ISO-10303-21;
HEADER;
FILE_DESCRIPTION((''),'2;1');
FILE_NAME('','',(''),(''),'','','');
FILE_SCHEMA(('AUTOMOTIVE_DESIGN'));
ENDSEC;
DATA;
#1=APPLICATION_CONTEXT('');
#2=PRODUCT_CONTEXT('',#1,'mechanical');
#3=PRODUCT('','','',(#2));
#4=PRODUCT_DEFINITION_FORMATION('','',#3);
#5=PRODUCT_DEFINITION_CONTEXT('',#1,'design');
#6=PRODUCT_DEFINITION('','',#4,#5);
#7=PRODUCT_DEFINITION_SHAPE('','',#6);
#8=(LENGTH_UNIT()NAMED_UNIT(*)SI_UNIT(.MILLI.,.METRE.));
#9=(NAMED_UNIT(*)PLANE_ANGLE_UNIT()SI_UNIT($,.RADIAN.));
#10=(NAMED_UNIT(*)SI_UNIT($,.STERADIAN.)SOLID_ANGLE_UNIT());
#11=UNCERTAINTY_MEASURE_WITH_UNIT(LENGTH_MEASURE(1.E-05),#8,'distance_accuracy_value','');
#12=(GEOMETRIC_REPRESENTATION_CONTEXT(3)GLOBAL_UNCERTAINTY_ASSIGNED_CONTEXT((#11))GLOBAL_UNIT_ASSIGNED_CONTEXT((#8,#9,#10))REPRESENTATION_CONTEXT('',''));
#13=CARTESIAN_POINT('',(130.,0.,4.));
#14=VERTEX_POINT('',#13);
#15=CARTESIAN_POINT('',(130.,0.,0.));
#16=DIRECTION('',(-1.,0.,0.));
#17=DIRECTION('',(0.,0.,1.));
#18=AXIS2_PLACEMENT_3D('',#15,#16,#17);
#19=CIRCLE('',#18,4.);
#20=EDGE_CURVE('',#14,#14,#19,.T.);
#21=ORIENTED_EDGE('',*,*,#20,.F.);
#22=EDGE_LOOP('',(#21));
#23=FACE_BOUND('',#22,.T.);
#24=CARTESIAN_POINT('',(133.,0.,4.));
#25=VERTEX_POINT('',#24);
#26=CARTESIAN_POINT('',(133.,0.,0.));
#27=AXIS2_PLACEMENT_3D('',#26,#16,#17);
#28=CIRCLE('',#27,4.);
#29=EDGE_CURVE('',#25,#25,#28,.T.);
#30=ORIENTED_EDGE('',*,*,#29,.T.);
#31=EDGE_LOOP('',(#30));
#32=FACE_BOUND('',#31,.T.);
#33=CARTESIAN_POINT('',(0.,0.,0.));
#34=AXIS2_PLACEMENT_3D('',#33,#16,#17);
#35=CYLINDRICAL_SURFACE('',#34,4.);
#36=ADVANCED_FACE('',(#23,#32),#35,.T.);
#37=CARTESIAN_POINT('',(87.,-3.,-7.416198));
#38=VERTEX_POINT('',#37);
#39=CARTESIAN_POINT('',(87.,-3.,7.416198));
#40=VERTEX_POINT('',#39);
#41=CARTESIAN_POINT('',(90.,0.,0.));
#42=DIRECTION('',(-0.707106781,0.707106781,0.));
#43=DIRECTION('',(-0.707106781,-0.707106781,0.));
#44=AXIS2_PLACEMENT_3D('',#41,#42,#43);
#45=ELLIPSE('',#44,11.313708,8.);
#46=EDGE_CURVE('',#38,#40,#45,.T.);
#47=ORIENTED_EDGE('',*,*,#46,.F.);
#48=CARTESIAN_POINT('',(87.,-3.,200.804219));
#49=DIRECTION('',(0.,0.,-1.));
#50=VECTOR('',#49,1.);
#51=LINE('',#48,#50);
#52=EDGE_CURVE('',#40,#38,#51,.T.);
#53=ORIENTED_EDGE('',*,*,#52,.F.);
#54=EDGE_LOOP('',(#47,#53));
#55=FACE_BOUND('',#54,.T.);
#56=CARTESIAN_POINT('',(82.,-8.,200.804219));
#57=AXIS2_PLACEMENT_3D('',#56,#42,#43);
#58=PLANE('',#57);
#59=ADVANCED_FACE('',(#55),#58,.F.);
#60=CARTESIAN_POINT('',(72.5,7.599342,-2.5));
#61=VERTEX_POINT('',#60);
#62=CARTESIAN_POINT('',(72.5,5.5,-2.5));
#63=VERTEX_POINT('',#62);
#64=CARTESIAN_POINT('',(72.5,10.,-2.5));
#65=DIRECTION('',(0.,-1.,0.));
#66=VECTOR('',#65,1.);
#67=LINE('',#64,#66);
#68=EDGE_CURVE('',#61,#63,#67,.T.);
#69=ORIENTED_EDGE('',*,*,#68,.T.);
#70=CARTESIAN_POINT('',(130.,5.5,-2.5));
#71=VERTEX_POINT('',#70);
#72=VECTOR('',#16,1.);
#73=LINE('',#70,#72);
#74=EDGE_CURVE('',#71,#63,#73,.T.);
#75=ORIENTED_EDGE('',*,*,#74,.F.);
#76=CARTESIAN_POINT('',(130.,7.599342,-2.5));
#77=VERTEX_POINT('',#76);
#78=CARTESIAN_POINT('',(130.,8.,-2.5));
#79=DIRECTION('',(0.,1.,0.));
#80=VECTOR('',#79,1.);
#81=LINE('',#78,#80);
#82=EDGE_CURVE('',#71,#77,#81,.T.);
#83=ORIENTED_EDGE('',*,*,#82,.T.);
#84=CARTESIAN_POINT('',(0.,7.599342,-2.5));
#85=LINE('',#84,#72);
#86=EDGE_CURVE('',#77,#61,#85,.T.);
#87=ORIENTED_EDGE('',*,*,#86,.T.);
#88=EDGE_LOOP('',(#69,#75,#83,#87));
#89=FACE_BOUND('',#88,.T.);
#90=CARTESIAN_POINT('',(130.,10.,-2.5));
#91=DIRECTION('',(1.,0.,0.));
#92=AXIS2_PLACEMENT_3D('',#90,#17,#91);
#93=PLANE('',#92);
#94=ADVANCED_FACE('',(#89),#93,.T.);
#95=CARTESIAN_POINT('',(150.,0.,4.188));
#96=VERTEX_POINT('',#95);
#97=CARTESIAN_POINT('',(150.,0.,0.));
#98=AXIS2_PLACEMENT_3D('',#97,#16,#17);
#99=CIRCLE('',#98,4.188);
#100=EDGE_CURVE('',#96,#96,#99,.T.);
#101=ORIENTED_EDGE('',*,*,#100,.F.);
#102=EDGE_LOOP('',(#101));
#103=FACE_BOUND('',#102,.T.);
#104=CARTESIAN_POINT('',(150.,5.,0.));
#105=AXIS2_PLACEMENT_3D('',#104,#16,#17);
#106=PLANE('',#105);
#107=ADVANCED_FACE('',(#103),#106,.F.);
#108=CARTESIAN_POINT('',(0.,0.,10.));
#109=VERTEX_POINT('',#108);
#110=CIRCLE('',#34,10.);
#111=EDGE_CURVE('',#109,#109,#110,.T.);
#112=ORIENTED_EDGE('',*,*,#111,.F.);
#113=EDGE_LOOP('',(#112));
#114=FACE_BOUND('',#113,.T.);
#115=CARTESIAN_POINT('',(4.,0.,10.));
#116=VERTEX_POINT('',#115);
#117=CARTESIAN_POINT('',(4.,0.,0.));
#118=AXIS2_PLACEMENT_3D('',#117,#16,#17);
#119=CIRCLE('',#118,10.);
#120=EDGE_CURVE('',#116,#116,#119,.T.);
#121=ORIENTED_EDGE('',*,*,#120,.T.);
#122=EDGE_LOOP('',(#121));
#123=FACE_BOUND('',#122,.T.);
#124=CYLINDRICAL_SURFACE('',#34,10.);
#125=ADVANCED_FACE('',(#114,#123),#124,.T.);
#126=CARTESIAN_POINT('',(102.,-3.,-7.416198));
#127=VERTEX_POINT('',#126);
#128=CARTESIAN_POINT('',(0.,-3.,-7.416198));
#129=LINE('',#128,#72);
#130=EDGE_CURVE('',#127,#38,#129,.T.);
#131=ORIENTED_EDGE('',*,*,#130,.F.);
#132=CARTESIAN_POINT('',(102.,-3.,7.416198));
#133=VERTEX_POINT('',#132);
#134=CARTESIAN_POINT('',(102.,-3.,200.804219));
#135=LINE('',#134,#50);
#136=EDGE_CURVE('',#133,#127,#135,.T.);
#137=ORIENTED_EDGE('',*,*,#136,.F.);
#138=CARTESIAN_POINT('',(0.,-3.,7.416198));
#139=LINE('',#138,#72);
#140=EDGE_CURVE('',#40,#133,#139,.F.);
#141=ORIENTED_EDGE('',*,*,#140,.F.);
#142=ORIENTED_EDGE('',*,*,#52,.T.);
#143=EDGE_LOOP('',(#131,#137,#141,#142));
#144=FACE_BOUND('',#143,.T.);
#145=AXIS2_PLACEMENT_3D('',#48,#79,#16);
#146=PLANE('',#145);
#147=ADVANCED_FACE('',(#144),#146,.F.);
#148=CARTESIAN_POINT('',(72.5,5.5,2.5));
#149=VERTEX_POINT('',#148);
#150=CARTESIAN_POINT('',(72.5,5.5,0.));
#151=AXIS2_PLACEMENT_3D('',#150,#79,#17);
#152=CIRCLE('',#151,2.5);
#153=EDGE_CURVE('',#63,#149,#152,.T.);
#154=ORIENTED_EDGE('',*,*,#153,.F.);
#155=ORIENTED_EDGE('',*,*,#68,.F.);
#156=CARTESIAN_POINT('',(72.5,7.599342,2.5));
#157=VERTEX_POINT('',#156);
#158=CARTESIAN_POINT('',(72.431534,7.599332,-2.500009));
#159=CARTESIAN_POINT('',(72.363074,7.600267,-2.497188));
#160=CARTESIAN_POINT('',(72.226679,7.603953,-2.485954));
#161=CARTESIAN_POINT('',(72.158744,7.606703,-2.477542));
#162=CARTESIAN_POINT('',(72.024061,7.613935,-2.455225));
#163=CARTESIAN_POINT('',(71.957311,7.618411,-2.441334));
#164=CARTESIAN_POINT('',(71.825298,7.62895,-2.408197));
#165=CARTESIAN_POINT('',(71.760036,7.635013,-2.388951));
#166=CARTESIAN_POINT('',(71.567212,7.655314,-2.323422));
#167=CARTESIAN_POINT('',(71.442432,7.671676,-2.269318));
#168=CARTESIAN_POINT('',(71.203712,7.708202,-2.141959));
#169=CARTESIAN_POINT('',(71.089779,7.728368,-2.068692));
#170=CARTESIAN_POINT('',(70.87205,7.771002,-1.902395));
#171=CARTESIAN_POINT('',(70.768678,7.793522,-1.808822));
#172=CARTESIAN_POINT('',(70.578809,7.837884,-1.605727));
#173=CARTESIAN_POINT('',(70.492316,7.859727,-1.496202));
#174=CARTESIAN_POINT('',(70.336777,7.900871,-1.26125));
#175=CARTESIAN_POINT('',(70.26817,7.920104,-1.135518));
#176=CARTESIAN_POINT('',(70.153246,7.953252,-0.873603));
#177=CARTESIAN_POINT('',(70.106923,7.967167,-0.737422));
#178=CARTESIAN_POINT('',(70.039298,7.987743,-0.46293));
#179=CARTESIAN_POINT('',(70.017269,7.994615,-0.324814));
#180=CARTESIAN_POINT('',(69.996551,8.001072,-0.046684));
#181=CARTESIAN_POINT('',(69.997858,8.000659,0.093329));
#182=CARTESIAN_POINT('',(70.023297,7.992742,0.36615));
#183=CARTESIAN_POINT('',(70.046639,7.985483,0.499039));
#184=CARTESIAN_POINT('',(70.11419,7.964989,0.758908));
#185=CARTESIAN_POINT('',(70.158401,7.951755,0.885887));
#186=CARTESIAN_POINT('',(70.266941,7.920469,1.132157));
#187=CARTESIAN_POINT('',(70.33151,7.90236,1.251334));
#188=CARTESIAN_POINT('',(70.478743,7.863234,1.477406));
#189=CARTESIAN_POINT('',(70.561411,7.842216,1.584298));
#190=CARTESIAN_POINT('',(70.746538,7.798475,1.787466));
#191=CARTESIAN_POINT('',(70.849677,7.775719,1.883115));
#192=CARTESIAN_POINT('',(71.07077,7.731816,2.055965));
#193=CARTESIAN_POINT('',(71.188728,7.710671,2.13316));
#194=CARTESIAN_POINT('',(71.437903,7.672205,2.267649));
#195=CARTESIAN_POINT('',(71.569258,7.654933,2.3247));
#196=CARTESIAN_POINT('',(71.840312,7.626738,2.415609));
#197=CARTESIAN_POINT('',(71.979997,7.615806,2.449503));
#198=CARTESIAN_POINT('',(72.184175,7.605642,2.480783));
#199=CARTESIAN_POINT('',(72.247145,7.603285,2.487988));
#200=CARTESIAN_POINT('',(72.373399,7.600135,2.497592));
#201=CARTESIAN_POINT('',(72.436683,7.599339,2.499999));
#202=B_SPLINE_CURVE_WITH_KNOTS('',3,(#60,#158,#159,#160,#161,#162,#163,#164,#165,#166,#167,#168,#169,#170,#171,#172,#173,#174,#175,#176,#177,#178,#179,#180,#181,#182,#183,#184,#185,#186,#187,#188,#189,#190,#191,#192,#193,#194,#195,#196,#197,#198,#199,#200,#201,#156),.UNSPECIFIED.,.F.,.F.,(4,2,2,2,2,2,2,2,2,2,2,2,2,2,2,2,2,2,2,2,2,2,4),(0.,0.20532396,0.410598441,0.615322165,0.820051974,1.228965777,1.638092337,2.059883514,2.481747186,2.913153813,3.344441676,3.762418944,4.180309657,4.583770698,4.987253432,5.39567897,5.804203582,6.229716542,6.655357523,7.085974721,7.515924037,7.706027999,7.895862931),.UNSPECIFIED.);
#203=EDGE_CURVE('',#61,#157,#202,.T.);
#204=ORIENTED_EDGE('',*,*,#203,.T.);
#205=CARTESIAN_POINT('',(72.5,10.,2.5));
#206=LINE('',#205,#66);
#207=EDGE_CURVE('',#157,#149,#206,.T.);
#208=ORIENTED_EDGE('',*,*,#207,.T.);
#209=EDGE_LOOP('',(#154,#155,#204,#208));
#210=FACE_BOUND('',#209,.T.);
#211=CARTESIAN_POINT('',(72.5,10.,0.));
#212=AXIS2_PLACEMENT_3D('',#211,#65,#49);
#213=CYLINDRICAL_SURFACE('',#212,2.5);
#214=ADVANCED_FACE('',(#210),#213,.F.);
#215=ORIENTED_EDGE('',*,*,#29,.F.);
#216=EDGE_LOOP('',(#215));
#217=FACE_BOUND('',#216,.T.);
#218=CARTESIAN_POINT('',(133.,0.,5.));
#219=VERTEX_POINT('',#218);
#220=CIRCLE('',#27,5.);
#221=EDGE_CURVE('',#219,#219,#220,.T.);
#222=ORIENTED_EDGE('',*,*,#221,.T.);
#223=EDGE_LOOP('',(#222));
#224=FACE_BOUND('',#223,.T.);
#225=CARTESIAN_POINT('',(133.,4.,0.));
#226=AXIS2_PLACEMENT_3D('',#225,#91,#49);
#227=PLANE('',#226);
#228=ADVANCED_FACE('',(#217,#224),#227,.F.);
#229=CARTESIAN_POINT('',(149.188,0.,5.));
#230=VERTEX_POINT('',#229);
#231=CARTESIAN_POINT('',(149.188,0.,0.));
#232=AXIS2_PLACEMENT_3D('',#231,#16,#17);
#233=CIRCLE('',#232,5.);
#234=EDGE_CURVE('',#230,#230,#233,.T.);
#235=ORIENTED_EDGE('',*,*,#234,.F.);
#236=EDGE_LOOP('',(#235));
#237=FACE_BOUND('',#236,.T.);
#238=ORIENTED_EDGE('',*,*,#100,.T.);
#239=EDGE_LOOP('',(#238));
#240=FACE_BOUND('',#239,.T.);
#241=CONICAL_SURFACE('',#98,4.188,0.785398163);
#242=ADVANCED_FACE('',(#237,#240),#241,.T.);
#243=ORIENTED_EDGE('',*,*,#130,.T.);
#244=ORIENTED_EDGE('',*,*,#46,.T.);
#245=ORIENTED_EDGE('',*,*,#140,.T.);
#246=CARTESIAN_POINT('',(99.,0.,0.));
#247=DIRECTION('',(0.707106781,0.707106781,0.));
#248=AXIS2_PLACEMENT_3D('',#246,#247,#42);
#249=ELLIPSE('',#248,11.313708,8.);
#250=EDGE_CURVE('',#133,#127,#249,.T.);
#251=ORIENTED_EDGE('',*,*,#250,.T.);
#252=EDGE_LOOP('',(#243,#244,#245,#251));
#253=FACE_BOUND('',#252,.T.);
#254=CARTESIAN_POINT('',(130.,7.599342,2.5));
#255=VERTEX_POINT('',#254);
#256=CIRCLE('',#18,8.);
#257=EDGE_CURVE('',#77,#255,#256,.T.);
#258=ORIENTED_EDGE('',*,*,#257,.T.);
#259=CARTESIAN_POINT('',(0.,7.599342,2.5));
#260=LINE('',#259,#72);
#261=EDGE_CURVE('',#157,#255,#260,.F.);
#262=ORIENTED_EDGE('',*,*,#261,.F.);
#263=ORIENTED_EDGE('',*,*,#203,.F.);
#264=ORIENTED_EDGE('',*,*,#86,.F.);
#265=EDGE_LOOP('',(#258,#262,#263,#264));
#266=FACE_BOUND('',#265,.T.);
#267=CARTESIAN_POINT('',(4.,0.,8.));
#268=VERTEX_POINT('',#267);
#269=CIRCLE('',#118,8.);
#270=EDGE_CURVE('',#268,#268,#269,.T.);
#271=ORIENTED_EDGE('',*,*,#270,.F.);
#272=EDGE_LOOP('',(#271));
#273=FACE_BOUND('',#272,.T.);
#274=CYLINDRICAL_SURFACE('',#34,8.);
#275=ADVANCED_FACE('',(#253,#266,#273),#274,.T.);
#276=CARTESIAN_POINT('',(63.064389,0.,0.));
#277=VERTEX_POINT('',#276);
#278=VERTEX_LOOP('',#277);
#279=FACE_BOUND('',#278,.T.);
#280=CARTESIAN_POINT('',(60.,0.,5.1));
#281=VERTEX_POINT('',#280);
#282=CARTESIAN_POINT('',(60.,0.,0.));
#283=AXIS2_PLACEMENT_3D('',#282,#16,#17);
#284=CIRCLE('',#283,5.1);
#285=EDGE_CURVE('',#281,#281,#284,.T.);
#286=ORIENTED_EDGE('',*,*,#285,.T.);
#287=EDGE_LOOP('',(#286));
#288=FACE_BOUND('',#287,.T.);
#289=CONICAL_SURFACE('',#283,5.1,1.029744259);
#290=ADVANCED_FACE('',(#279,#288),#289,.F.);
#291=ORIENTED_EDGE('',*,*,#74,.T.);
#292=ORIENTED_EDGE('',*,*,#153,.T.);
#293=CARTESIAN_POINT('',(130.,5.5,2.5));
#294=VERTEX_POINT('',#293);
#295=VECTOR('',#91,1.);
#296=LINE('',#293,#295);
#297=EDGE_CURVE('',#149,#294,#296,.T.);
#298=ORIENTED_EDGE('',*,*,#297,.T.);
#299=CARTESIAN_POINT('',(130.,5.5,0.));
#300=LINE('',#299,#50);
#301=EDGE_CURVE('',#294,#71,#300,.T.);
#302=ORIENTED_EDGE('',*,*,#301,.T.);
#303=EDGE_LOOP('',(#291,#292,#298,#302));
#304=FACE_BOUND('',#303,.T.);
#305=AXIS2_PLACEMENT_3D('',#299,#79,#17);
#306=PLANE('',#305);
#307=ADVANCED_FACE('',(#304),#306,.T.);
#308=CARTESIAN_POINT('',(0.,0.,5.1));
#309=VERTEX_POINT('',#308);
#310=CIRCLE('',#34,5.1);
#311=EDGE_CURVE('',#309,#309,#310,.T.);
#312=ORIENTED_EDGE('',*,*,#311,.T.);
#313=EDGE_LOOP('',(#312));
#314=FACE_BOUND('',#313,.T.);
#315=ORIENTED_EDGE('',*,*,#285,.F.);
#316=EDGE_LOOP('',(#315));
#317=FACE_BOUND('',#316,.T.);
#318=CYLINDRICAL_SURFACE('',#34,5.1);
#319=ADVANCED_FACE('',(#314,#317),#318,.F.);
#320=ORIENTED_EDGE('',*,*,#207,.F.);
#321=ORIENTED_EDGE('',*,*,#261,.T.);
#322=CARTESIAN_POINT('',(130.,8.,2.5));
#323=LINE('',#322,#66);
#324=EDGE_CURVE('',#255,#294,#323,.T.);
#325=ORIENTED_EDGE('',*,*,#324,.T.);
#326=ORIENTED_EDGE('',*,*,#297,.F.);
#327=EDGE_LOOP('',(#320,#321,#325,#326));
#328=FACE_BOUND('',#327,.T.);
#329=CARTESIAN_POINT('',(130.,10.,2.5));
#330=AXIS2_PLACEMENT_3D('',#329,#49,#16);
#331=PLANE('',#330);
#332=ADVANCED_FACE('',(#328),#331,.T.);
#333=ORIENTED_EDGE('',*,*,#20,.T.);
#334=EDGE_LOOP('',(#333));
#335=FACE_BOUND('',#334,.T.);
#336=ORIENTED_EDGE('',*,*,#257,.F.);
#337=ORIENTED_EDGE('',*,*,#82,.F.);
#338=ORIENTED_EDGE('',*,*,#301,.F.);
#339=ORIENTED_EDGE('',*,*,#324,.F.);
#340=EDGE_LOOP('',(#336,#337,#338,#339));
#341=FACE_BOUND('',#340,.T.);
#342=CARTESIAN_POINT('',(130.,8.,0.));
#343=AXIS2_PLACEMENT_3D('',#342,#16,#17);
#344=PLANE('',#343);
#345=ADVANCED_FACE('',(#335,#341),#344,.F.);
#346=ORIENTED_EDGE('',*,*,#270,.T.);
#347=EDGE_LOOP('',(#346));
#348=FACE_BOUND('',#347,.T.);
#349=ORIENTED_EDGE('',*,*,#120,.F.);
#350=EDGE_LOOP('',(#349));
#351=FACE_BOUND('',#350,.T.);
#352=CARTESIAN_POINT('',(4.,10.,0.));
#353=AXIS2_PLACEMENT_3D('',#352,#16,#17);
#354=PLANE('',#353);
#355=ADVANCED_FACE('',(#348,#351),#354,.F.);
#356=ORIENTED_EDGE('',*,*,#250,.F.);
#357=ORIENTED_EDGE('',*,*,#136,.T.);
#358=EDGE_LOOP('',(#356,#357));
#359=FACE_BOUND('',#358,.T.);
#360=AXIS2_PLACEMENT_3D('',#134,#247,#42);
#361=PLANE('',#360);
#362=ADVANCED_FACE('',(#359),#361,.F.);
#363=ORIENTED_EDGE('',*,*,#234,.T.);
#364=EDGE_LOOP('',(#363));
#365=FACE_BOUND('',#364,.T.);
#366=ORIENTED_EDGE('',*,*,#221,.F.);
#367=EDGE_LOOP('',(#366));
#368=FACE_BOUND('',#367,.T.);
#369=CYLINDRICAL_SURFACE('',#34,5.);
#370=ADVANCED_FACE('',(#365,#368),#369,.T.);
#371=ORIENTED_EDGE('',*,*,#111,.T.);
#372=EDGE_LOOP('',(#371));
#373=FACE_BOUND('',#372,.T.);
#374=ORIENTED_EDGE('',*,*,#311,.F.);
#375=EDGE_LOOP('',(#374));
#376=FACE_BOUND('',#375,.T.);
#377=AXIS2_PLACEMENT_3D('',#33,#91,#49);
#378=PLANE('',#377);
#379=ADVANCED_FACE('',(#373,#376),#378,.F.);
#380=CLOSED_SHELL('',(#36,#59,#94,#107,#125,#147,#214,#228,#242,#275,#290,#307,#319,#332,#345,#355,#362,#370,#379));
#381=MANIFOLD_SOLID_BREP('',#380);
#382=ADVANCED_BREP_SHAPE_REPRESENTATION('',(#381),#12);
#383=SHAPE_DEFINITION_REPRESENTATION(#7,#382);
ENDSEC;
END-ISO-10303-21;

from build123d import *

# Parameters (mm, degrees)
CUT_EXTRUDE_START        = 5.5
CUT_EXTRUDE_1_DEPTH      = 146.165191733
HOLE_WIZARD_M12_1_D      = 10.2
HOLE_WIZARD_M12_1_DEPTH  = 60
HOLE_WIZARD_M12_1_TIP    = 3.064389157
CUT_EXTRUDE_2_DEPTH      = 151.665191733
CUT_EXTRUDE_2_DEPTH_BACK = 151.665191733


# Read off the part's stored shape, not the designer's step: M10 机械螺纹 螺柱1
with BuildPart() as part:
    # 草图1 → 旋转1 (revolve)
    with BuildSketch(Plane.XY, mode=Mode.PRIVATE) as revolve_1_sk:
        Polygon((0, 0), (0, 10), (4, 10), (4, 8), (130, 8), (130, 4), (133, 4), (133, 5), (150, 5), (150, 0), align=None)
    revolve(revolve_1_sk.sketch.rotate(Axis((0, 0, 0), (1, 0, 0)), 90), axis=Axis((0, 0, 0), (1, 0, 0)))

    # M10 机械螺纹 螺柱1 outline → M10 机械螺纹 螺柱1 (revolve, cut)
    with BuildSketch(Plane.YX):
        Polygon((5, 150), (4.188, 150), (5, 149.188), align=None)
    revolve(axis=Axis((0, 0, 0), (1, 0, 0)), mode=Mode.SUBTRACT)

    # 草图3 → 切除-拉伸1 (cut, through all)
    with BuildSketch(Plane(origin=(0, 0, 0), x_dir=(1, 0, 0), z_dir=(0, 1, 0)).offset(CUT_EXTRUDE_START)):
        with BuildLine():
            Line((130, -2.5), (72.5, -2.5))
            ThreePointArc((72.5, -2.5), (70, 0), (72.5, 2.5))
            Line((72.5, 2.5), (130, 2.5))
            ThreePointArc((130, 2.5), (132.5, 0), (130, -2.5))
        make_face()
    extrude(amount=CUT_EXTRUDE_1_DEPTH, mode=Mode.SUBTRACT)

    # M12 螺纹孔1
    with Locations(Plane.ZY):
        with Locations((0, 0)):
            Hole(HOLE_WIZARD_M12_1_D / 2, depth=HOLE_WIZARD_M12_1_DEPTH)
            with Locations((0, 0, -(HOLE_WIZARD_M12_1_DEPTH + HOLE_WIZARD_M12_1_TIP / 2))):  # 118° drill point
                Cone(0, HOLE_WIZARD_M12_1_D / 2, HOLE_WIZARD_M12_1_TIP, mode=Mode.SUBTRACT)

    # 草图6 → 切除-拉伸2 (cut, two sides: drawn at the far end of the back side and taken through both)
    with BuildSketch(Plane.XY.offset(-CUT_EXTRUDE_2_DEPTH_BACK)):
        Polygon((-78.518127086, -168.518127086), (82, -8), (87, -3), (102, -3), (107, -8), (267.518127086, -168.518127086), (267.518127086, -622.531951751), (-78.518127086, -622.531951751), align=None)
    extrude(amount=CUT_EXTRUDE_2_DEPTH + CUT_EXTRUDE_2_DEPTH_BACK, mode=Mode.SUBTRACT)


solid = part.part
